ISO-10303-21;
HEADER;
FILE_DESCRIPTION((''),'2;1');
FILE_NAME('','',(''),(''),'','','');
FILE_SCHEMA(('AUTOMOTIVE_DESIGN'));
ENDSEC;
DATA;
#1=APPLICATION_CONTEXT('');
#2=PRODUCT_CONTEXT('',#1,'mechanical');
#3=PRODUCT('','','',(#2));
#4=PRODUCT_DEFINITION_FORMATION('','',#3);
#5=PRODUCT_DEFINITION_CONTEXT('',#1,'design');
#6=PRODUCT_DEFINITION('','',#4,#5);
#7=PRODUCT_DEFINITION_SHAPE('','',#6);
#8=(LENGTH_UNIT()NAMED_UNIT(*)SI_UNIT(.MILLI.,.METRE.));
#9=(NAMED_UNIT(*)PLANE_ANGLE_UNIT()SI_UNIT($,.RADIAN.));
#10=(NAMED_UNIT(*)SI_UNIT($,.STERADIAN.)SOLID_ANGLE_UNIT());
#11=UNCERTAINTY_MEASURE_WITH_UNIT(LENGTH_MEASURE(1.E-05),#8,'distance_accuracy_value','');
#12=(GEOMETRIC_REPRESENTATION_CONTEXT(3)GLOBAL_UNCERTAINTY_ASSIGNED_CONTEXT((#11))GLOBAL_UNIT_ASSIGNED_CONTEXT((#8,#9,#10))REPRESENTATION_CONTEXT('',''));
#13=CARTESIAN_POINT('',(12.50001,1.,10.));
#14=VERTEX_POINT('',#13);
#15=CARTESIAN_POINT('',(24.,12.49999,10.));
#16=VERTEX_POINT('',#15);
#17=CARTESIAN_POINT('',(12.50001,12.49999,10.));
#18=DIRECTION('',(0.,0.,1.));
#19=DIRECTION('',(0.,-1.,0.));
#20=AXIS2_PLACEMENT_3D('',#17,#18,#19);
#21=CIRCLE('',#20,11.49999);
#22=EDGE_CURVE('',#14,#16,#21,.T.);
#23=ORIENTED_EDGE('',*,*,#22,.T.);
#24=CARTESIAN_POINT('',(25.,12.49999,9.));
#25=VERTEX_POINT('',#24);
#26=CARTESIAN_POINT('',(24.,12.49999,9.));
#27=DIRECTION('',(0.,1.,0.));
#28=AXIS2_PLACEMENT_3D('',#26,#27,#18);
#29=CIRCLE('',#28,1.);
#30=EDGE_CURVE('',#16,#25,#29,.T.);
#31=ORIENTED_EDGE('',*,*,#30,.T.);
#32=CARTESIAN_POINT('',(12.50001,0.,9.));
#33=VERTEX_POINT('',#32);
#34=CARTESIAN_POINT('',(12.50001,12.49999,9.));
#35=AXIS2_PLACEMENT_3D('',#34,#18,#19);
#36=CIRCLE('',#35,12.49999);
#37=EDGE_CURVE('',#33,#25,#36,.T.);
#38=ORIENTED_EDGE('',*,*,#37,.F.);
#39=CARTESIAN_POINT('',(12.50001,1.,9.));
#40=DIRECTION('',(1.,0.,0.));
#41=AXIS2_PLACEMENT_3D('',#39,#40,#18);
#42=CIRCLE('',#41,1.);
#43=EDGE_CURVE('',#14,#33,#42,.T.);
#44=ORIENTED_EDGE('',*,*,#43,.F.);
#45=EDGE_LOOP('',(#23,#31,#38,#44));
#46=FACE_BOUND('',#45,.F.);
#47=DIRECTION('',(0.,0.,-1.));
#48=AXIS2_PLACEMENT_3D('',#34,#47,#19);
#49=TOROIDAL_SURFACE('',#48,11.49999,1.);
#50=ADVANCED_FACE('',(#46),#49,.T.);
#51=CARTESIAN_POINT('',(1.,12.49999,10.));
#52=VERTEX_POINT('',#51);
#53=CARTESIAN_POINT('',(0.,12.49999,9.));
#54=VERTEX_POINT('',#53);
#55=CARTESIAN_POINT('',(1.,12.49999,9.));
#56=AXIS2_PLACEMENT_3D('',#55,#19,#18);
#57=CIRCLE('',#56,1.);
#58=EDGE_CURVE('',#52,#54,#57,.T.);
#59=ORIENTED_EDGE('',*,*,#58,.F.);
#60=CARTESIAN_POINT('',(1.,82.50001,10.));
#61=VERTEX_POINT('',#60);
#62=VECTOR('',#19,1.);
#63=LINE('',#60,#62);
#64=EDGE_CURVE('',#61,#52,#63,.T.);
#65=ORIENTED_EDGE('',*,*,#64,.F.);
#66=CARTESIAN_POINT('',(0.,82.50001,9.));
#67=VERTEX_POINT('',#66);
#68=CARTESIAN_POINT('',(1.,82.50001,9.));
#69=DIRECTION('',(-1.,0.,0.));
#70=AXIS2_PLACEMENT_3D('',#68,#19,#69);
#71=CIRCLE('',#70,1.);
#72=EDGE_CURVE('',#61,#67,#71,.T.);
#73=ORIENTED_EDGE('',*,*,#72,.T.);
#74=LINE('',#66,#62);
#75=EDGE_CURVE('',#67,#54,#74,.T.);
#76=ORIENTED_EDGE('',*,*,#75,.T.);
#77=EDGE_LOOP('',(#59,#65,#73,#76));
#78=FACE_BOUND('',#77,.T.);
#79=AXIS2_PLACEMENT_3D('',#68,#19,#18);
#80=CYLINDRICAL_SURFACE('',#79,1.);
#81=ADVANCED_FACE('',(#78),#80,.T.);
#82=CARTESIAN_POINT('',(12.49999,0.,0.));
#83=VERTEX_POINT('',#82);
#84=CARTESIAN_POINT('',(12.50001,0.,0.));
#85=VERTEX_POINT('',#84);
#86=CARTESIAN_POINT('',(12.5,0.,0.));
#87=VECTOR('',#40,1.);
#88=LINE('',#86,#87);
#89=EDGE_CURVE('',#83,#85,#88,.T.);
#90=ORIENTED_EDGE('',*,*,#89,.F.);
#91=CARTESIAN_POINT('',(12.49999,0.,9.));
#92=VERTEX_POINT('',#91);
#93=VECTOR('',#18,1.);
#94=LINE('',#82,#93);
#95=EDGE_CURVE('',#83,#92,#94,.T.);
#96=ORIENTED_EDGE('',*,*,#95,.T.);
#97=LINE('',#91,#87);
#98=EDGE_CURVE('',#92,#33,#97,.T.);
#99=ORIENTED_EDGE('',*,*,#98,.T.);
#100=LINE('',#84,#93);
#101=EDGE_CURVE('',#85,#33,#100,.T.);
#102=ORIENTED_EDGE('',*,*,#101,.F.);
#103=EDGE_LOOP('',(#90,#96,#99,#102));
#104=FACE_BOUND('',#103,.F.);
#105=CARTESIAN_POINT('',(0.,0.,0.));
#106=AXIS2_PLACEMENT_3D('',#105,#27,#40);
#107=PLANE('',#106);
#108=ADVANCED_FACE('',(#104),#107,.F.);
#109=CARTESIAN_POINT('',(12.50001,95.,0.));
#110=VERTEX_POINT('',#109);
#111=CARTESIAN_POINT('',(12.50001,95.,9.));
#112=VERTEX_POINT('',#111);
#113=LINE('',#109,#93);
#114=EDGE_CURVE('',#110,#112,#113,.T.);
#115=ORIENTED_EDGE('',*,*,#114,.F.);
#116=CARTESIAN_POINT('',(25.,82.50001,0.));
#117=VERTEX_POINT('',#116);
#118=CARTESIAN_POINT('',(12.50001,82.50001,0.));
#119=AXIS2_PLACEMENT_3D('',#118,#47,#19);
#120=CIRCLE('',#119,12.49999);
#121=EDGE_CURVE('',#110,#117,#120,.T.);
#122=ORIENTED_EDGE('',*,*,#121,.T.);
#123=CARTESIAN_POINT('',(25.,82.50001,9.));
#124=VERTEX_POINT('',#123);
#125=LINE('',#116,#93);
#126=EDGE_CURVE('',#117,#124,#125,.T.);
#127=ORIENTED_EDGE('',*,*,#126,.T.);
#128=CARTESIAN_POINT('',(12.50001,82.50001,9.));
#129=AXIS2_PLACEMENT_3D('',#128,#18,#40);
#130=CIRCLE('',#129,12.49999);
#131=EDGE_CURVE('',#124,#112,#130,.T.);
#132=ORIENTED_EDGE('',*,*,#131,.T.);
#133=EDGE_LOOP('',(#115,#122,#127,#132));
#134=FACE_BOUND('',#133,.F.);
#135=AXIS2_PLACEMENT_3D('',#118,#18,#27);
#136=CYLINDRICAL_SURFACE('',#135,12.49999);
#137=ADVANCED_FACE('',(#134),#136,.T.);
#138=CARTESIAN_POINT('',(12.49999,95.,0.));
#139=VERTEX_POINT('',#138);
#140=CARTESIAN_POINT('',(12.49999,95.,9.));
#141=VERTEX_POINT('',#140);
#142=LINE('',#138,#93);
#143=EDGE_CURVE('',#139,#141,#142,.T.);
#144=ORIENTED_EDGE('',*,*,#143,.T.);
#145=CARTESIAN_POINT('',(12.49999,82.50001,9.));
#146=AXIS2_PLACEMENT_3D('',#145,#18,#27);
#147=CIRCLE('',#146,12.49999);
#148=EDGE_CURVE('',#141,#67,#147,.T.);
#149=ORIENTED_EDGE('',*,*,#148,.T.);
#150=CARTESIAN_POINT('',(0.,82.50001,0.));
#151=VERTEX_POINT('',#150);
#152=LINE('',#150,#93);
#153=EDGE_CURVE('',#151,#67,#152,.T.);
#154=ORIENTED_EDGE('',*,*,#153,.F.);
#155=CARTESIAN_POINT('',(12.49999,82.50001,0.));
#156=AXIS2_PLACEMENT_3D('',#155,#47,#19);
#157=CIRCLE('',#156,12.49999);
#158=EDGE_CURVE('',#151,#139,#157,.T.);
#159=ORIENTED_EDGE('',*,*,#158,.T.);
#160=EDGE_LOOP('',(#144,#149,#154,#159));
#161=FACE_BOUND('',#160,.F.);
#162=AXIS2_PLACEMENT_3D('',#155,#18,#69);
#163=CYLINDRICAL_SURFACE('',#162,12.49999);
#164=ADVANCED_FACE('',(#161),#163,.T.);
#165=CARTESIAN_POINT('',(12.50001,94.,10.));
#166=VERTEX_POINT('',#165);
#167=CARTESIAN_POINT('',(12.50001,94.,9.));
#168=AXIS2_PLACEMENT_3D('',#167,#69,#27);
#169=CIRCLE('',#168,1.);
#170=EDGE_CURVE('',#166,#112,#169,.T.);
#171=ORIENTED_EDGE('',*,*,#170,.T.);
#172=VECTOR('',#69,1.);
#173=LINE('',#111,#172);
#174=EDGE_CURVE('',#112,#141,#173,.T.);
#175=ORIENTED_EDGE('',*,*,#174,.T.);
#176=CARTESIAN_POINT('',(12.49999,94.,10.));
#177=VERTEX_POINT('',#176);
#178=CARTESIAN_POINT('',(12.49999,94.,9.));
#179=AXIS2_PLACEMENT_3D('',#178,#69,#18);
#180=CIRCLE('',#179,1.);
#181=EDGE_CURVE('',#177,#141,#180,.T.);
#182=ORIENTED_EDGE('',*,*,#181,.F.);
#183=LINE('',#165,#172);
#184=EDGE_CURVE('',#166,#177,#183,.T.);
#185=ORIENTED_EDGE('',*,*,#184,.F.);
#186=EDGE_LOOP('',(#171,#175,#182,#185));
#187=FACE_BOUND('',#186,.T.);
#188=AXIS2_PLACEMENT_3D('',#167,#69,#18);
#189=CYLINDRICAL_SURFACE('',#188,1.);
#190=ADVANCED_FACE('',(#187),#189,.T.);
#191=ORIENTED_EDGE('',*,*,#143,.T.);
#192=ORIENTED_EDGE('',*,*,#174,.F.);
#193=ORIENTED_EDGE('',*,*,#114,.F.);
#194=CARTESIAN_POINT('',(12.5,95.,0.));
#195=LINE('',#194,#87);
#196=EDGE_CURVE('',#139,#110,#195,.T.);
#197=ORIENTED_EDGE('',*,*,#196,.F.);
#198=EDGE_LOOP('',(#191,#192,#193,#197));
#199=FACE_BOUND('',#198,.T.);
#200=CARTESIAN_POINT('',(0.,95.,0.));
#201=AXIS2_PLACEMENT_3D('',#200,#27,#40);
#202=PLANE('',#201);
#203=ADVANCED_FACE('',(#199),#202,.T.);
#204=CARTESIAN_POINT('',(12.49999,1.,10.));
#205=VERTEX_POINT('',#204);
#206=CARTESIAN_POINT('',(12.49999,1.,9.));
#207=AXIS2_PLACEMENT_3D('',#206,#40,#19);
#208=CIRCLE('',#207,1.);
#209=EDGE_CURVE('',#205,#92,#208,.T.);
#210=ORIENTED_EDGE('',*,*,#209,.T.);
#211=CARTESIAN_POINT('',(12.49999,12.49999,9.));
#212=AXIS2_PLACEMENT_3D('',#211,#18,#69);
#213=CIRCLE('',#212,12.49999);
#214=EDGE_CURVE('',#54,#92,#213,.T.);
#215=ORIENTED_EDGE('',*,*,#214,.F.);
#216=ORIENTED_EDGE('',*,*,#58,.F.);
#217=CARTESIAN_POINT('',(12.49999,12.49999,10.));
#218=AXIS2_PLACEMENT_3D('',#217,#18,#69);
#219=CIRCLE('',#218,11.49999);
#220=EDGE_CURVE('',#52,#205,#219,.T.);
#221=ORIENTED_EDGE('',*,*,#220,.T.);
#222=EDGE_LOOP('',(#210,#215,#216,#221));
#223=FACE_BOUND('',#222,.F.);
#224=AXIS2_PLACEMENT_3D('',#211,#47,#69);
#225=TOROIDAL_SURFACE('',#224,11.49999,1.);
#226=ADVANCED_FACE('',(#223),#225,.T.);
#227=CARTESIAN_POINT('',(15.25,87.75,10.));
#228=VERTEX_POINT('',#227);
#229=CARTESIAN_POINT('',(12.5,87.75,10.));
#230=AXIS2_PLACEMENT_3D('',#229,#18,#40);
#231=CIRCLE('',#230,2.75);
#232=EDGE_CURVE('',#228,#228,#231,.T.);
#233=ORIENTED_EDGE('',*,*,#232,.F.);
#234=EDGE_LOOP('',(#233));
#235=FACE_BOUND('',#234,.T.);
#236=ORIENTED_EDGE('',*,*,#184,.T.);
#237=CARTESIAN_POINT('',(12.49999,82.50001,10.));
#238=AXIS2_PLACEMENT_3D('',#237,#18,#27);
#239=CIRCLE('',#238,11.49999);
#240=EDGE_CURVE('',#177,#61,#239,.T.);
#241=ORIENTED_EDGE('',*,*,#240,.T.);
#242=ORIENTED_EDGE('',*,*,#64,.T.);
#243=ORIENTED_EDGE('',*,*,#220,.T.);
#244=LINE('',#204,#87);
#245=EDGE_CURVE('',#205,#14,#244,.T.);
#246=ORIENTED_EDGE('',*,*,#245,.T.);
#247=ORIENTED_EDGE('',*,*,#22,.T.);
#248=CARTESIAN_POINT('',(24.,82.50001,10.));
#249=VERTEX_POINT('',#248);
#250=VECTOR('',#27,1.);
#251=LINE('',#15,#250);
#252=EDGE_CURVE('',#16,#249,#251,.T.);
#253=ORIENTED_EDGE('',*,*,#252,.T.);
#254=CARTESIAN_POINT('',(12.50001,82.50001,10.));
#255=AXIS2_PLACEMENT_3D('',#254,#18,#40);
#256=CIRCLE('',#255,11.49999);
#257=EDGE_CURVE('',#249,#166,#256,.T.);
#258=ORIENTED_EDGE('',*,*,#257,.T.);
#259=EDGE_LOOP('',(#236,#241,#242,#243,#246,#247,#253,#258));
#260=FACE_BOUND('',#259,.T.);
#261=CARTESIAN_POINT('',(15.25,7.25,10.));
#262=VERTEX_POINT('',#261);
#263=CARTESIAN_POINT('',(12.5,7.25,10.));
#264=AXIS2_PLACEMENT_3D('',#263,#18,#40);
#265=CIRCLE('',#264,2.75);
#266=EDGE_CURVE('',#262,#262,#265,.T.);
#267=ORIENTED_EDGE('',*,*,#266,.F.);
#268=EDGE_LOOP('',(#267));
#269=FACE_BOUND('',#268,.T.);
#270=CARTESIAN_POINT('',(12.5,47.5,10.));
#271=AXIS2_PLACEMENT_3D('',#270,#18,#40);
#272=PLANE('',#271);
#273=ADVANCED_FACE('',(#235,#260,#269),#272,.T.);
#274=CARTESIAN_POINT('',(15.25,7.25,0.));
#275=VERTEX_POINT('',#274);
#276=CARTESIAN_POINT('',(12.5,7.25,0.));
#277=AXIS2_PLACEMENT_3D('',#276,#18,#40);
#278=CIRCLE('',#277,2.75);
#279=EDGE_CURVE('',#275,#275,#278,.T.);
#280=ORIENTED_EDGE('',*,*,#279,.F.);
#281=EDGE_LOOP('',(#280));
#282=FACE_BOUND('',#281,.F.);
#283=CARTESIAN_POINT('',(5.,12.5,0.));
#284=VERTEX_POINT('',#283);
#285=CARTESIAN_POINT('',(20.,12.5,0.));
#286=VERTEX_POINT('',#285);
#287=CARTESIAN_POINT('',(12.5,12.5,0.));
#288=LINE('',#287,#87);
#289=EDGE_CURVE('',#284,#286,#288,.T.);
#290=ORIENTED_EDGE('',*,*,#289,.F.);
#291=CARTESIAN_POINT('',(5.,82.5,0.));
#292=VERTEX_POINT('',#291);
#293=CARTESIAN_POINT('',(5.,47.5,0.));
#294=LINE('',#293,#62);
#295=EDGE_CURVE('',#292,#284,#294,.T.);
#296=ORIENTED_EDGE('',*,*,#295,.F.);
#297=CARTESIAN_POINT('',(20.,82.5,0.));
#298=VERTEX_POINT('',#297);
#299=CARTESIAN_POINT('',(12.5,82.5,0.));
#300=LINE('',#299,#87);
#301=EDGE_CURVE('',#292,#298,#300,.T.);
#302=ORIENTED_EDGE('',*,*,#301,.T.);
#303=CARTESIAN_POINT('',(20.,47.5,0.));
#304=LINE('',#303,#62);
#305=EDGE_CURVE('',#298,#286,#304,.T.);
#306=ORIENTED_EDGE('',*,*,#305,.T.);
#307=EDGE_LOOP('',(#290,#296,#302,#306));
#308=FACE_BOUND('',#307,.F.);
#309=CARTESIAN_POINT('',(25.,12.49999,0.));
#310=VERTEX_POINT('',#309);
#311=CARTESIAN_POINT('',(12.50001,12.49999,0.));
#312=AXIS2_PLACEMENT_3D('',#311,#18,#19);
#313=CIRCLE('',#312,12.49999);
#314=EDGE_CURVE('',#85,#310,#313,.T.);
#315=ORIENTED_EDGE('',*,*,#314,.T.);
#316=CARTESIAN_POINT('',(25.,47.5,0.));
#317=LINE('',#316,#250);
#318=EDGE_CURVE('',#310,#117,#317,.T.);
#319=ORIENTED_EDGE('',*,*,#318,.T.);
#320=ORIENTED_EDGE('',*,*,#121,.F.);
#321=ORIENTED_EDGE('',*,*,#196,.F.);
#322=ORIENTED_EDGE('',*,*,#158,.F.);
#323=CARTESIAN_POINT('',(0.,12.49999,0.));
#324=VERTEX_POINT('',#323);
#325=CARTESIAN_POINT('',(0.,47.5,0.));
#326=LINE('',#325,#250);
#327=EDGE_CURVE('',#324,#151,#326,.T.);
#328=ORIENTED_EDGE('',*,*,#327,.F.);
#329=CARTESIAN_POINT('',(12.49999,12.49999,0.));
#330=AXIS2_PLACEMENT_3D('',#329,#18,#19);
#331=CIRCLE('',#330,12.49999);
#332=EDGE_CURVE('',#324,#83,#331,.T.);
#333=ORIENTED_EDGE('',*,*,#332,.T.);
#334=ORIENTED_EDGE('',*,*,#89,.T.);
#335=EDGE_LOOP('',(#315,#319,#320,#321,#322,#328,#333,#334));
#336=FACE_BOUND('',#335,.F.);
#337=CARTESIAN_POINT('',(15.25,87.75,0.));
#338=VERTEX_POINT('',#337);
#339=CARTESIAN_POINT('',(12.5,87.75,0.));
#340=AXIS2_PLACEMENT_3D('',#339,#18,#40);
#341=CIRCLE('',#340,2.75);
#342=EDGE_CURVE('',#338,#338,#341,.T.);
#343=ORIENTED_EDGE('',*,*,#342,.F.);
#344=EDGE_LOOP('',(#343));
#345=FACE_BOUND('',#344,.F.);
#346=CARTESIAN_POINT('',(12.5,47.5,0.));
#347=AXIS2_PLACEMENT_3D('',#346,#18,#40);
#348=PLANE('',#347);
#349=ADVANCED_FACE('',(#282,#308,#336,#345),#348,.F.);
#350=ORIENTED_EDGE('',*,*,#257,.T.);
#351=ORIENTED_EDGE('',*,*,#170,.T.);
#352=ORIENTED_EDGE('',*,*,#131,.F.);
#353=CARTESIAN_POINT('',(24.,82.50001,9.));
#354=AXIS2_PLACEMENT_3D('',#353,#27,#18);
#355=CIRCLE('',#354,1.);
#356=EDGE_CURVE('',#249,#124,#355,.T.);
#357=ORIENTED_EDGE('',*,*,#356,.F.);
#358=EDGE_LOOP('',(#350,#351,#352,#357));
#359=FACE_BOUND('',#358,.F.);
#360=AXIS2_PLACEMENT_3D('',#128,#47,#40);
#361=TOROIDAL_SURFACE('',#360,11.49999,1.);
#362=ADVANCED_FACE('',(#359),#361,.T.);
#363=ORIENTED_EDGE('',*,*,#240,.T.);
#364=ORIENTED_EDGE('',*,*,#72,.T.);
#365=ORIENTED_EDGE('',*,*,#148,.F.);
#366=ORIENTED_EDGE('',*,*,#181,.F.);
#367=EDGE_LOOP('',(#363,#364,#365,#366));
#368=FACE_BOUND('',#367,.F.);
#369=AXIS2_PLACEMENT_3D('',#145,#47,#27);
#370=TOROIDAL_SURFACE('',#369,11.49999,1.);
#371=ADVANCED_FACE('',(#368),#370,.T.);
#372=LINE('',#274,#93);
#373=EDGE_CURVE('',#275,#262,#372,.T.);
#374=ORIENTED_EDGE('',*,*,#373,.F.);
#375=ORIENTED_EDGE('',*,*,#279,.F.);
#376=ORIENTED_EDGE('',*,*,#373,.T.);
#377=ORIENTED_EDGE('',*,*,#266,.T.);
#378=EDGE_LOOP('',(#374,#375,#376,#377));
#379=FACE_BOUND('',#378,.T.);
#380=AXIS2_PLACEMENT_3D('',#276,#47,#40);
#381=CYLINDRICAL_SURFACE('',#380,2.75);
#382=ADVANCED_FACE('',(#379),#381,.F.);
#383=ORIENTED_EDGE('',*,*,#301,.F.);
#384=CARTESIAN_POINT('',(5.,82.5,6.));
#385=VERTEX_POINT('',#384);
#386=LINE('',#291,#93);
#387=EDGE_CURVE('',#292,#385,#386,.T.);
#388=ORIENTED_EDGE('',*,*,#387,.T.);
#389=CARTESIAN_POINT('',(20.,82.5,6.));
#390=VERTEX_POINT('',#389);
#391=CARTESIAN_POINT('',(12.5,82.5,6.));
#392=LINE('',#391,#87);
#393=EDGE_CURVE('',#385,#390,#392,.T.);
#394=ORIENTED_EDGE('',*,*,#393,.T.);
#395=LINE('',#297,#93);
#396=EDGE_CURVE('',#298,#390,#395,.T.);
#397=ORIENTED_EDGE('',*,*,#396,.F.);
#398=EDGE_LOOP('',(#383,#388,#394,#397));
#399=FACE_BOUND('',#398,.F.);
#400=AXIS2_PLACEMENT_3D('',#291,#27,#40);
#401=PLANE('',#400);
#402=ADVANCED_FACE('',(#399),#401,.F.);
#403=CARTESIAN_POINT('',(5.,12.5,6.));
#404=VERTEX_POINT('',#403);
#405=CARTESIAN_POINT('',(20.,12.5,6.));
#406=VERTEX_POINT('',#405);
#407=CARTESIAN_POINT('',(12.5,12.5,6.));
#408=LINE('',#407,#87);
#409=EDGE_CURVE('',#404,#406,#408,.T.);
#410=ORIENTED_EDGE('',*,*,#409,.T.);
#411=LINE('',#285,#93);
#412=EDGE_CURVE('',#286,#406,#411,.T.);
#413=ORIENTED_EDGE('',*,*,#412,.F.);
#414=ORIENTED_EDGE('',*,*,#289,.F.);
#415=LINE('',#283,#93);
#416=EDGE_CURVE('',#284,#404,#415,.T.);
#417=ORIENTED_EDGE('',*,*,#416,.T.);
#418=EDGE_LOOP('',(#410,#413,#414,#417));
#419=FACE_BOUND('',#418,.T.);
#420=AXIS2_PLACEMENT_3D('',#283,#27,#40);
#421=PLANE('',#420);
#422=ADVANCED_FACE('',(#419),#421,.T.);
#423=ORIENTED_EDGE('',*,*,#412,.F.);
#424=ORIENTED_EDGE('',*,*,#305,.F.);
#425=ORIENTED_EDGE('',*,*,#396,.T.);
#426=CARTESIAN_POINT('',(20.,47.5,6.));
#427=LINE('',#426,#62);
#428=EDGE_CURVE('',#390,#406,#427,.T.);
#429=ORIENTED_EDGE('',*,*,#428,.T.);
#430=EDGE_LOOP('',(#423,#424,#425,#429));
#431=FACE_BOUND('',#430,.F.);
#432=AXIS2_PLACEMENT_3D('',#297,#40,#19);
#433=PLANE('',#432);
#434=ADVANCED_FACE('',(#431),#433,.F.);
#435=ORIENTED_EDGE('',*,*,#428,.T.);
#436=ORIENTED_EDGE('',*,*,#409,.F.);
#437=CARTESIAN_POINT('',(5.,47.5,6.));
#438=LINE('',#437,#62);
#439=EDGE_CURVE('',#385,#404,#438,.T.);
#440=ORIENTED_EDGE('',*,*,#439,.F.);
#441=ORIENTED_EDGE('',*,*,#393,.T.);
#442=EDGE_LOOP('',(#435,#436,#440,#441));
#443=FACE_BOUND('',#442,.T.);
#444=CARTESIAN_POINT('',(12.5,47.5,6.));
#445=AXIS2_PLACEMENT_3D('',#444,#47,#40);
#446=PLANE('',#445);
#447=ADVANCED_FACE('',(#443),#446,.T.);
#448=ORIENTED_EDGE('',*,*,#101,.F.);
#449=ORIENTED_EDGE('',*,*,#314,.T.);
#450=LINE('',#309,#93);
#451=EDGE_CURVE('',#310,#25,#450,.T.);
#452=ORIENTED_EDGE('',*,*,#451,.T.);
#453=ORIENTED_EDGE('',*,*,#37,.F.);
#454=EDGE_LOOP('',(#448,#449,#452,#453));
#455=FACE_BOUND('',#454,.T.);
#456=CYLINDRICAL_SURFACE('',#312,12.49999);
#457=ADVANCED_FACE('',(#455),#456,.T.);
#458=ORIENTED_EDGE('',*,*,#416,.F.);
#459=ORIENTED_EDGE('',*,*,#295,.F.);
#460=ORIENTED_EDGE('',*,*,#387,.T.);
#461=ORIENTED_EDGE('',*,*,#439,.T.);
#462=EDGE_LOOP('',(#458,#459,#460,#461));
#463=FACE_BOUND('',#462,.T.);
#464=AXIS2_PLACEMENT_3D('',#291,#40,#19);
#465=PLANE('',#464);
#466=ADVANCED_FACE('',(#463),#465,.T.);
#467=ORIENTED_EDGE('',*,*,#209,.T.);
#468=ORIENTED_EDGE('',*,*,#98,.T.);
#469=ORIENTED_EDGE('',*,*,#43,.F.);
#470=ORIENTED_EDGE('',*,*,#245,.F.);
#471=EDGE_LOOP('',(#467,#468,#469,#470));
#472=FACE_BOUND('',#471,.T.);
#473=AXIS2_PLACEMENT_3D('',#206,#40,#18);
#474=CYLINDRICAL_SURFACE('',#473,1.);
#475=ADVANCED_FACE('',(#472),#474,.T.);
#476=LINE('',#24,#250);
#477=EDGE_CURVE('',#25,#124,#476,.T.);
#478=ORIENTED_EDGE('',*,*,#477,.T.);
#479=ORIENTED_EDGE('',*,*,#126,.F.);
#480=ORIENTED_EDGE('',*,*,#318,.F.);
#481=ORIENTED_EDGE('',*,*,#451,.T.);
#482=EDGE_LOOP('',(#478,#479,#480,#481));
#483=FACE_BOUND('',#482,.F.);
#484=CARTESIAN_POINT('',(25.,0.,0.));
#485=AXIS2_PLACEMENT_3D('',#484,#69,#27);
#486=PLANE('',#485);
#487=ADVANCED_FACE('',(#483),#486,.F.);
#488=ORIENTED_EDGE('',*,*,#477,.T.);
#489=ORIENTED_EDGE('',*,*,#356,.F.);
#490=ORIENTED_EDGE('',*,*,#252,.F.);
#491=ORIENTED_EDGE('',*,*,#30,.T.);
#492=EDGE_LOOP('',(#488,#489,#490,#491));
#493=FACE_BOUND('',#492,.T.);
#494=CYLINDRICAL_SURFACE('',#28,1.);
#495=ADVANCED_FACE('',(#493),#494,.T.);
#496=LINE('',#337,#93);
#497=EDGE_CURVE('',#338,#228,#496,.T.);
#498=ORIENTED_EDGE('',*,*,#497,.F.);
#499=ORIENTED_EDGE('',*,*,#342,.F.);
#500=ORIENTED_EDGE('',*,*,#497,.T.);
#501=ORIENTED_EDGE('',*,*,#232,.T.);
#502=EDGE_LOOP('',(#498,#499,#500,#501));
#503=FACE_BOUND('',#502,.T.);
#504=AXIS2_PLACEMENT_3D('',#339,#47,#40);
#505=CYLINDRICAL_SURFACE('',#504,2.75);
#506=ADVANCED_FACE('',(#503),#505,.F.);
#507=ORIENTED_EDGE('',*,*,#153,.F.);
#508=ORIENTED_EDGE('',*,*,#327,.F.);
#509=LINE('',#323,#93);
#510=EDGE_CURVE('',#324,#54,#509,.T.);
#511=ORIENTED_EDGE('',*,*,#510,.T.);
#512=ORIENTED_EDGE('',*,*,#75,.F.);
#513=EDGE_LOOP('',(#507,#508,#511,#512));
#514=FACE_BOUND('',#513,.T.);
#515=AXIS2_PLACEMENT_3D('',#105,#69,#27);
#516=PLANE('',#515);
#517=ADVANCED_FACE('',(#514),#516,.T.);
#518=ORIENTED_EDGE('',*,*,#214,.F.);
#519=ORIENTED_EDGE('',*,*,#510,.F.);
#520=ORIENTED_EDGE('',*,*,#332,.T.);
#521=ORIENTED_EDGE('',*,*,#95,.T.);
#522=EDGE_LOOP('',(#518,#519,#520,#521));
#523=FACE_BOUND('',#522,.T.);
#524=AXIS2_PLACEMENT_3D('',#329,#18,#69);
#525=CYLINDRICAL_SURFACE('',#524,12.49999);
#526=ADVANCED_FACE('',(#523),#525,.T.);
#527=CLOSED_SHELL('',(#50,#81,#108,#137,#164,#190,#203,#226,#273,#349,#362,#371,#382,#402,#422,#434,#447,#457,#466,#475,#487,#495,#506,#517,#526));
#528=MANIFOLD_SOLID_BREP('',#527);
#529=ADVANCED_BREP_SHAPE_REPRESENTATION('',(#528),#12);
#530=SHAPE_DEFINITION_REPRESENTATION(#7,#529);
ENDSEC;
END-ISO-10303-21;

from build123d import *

# Parameters (mm, degrees)
F0_W     = 25
F0_H     = 95
F0_R     = 2.75
F1_DEPTH = 10
F2_R     = 12.49999
F3_R     = 1
F4_W     = 15
F4_H     = 70
F5_DEPTH = 6


# Not quite as in the source:
# - a fillet or chamfer is up to 0.001 mm smaller than in the source, because OpenCascade refuses the exact size


with BuildPart() as f1:
    # F0 (on Top) → F1 (new body)
    with BuildSketch(Plane.XY):
        with Locations((12.5, 47.5)):
            Rectangle(F0_W, F0_H)
        with Locations((12.5, 7.25)):
            Circle(F0_R, mode=Mode.SUBTRACT)
        with Locations((12.5, 87.75)):
            Circle(F0_R, mode=Mode.SUBTRACT)
    extrude(amount=F1_DEPTH)

    # F2 (radius 12.5 in the source; OpenCascade refuses exactly that, so slightly less here)
    f2_edges = [f1.edges().sort_by_distance(p)[0] for p in [
        (25, 95, 5),
        (0, 95, 5),
        (25, 0, 5),
        (0, 0, 5),
    ]]
    fillet(f2_edges, radius=F2_R)

    # F3
    f3_edges = [f1.edges().sort_by_distance(p)[0] for p in [
        (25, 47.5, 10),
        (0, 47.5, 10),
        (12.5, 95, 10),
        (21.338838, 91.338838, 10),
        (3.661162, 91.338838, 10),
        (21.338838, 3.661162, 10),
        (12.5, 0, 10),
        (3.661162, 3.661162, 10),
    ]]
    fillet(f3_edges, radius=F3_R)

    # F4 (on face) → F5 (cut)
    with BuildSketch(Plane(origin=(0, 0, 0), x_dir=(1, 0, 0), z_dir=(0, 0, -1))):
        with Locations((12.5, -47.5)):
            Rectangle(F4_W, F4_H)
    extrude(amount=-F5_DEPTH, mode=Mode.SUBTRACT)


solid = f1.part
